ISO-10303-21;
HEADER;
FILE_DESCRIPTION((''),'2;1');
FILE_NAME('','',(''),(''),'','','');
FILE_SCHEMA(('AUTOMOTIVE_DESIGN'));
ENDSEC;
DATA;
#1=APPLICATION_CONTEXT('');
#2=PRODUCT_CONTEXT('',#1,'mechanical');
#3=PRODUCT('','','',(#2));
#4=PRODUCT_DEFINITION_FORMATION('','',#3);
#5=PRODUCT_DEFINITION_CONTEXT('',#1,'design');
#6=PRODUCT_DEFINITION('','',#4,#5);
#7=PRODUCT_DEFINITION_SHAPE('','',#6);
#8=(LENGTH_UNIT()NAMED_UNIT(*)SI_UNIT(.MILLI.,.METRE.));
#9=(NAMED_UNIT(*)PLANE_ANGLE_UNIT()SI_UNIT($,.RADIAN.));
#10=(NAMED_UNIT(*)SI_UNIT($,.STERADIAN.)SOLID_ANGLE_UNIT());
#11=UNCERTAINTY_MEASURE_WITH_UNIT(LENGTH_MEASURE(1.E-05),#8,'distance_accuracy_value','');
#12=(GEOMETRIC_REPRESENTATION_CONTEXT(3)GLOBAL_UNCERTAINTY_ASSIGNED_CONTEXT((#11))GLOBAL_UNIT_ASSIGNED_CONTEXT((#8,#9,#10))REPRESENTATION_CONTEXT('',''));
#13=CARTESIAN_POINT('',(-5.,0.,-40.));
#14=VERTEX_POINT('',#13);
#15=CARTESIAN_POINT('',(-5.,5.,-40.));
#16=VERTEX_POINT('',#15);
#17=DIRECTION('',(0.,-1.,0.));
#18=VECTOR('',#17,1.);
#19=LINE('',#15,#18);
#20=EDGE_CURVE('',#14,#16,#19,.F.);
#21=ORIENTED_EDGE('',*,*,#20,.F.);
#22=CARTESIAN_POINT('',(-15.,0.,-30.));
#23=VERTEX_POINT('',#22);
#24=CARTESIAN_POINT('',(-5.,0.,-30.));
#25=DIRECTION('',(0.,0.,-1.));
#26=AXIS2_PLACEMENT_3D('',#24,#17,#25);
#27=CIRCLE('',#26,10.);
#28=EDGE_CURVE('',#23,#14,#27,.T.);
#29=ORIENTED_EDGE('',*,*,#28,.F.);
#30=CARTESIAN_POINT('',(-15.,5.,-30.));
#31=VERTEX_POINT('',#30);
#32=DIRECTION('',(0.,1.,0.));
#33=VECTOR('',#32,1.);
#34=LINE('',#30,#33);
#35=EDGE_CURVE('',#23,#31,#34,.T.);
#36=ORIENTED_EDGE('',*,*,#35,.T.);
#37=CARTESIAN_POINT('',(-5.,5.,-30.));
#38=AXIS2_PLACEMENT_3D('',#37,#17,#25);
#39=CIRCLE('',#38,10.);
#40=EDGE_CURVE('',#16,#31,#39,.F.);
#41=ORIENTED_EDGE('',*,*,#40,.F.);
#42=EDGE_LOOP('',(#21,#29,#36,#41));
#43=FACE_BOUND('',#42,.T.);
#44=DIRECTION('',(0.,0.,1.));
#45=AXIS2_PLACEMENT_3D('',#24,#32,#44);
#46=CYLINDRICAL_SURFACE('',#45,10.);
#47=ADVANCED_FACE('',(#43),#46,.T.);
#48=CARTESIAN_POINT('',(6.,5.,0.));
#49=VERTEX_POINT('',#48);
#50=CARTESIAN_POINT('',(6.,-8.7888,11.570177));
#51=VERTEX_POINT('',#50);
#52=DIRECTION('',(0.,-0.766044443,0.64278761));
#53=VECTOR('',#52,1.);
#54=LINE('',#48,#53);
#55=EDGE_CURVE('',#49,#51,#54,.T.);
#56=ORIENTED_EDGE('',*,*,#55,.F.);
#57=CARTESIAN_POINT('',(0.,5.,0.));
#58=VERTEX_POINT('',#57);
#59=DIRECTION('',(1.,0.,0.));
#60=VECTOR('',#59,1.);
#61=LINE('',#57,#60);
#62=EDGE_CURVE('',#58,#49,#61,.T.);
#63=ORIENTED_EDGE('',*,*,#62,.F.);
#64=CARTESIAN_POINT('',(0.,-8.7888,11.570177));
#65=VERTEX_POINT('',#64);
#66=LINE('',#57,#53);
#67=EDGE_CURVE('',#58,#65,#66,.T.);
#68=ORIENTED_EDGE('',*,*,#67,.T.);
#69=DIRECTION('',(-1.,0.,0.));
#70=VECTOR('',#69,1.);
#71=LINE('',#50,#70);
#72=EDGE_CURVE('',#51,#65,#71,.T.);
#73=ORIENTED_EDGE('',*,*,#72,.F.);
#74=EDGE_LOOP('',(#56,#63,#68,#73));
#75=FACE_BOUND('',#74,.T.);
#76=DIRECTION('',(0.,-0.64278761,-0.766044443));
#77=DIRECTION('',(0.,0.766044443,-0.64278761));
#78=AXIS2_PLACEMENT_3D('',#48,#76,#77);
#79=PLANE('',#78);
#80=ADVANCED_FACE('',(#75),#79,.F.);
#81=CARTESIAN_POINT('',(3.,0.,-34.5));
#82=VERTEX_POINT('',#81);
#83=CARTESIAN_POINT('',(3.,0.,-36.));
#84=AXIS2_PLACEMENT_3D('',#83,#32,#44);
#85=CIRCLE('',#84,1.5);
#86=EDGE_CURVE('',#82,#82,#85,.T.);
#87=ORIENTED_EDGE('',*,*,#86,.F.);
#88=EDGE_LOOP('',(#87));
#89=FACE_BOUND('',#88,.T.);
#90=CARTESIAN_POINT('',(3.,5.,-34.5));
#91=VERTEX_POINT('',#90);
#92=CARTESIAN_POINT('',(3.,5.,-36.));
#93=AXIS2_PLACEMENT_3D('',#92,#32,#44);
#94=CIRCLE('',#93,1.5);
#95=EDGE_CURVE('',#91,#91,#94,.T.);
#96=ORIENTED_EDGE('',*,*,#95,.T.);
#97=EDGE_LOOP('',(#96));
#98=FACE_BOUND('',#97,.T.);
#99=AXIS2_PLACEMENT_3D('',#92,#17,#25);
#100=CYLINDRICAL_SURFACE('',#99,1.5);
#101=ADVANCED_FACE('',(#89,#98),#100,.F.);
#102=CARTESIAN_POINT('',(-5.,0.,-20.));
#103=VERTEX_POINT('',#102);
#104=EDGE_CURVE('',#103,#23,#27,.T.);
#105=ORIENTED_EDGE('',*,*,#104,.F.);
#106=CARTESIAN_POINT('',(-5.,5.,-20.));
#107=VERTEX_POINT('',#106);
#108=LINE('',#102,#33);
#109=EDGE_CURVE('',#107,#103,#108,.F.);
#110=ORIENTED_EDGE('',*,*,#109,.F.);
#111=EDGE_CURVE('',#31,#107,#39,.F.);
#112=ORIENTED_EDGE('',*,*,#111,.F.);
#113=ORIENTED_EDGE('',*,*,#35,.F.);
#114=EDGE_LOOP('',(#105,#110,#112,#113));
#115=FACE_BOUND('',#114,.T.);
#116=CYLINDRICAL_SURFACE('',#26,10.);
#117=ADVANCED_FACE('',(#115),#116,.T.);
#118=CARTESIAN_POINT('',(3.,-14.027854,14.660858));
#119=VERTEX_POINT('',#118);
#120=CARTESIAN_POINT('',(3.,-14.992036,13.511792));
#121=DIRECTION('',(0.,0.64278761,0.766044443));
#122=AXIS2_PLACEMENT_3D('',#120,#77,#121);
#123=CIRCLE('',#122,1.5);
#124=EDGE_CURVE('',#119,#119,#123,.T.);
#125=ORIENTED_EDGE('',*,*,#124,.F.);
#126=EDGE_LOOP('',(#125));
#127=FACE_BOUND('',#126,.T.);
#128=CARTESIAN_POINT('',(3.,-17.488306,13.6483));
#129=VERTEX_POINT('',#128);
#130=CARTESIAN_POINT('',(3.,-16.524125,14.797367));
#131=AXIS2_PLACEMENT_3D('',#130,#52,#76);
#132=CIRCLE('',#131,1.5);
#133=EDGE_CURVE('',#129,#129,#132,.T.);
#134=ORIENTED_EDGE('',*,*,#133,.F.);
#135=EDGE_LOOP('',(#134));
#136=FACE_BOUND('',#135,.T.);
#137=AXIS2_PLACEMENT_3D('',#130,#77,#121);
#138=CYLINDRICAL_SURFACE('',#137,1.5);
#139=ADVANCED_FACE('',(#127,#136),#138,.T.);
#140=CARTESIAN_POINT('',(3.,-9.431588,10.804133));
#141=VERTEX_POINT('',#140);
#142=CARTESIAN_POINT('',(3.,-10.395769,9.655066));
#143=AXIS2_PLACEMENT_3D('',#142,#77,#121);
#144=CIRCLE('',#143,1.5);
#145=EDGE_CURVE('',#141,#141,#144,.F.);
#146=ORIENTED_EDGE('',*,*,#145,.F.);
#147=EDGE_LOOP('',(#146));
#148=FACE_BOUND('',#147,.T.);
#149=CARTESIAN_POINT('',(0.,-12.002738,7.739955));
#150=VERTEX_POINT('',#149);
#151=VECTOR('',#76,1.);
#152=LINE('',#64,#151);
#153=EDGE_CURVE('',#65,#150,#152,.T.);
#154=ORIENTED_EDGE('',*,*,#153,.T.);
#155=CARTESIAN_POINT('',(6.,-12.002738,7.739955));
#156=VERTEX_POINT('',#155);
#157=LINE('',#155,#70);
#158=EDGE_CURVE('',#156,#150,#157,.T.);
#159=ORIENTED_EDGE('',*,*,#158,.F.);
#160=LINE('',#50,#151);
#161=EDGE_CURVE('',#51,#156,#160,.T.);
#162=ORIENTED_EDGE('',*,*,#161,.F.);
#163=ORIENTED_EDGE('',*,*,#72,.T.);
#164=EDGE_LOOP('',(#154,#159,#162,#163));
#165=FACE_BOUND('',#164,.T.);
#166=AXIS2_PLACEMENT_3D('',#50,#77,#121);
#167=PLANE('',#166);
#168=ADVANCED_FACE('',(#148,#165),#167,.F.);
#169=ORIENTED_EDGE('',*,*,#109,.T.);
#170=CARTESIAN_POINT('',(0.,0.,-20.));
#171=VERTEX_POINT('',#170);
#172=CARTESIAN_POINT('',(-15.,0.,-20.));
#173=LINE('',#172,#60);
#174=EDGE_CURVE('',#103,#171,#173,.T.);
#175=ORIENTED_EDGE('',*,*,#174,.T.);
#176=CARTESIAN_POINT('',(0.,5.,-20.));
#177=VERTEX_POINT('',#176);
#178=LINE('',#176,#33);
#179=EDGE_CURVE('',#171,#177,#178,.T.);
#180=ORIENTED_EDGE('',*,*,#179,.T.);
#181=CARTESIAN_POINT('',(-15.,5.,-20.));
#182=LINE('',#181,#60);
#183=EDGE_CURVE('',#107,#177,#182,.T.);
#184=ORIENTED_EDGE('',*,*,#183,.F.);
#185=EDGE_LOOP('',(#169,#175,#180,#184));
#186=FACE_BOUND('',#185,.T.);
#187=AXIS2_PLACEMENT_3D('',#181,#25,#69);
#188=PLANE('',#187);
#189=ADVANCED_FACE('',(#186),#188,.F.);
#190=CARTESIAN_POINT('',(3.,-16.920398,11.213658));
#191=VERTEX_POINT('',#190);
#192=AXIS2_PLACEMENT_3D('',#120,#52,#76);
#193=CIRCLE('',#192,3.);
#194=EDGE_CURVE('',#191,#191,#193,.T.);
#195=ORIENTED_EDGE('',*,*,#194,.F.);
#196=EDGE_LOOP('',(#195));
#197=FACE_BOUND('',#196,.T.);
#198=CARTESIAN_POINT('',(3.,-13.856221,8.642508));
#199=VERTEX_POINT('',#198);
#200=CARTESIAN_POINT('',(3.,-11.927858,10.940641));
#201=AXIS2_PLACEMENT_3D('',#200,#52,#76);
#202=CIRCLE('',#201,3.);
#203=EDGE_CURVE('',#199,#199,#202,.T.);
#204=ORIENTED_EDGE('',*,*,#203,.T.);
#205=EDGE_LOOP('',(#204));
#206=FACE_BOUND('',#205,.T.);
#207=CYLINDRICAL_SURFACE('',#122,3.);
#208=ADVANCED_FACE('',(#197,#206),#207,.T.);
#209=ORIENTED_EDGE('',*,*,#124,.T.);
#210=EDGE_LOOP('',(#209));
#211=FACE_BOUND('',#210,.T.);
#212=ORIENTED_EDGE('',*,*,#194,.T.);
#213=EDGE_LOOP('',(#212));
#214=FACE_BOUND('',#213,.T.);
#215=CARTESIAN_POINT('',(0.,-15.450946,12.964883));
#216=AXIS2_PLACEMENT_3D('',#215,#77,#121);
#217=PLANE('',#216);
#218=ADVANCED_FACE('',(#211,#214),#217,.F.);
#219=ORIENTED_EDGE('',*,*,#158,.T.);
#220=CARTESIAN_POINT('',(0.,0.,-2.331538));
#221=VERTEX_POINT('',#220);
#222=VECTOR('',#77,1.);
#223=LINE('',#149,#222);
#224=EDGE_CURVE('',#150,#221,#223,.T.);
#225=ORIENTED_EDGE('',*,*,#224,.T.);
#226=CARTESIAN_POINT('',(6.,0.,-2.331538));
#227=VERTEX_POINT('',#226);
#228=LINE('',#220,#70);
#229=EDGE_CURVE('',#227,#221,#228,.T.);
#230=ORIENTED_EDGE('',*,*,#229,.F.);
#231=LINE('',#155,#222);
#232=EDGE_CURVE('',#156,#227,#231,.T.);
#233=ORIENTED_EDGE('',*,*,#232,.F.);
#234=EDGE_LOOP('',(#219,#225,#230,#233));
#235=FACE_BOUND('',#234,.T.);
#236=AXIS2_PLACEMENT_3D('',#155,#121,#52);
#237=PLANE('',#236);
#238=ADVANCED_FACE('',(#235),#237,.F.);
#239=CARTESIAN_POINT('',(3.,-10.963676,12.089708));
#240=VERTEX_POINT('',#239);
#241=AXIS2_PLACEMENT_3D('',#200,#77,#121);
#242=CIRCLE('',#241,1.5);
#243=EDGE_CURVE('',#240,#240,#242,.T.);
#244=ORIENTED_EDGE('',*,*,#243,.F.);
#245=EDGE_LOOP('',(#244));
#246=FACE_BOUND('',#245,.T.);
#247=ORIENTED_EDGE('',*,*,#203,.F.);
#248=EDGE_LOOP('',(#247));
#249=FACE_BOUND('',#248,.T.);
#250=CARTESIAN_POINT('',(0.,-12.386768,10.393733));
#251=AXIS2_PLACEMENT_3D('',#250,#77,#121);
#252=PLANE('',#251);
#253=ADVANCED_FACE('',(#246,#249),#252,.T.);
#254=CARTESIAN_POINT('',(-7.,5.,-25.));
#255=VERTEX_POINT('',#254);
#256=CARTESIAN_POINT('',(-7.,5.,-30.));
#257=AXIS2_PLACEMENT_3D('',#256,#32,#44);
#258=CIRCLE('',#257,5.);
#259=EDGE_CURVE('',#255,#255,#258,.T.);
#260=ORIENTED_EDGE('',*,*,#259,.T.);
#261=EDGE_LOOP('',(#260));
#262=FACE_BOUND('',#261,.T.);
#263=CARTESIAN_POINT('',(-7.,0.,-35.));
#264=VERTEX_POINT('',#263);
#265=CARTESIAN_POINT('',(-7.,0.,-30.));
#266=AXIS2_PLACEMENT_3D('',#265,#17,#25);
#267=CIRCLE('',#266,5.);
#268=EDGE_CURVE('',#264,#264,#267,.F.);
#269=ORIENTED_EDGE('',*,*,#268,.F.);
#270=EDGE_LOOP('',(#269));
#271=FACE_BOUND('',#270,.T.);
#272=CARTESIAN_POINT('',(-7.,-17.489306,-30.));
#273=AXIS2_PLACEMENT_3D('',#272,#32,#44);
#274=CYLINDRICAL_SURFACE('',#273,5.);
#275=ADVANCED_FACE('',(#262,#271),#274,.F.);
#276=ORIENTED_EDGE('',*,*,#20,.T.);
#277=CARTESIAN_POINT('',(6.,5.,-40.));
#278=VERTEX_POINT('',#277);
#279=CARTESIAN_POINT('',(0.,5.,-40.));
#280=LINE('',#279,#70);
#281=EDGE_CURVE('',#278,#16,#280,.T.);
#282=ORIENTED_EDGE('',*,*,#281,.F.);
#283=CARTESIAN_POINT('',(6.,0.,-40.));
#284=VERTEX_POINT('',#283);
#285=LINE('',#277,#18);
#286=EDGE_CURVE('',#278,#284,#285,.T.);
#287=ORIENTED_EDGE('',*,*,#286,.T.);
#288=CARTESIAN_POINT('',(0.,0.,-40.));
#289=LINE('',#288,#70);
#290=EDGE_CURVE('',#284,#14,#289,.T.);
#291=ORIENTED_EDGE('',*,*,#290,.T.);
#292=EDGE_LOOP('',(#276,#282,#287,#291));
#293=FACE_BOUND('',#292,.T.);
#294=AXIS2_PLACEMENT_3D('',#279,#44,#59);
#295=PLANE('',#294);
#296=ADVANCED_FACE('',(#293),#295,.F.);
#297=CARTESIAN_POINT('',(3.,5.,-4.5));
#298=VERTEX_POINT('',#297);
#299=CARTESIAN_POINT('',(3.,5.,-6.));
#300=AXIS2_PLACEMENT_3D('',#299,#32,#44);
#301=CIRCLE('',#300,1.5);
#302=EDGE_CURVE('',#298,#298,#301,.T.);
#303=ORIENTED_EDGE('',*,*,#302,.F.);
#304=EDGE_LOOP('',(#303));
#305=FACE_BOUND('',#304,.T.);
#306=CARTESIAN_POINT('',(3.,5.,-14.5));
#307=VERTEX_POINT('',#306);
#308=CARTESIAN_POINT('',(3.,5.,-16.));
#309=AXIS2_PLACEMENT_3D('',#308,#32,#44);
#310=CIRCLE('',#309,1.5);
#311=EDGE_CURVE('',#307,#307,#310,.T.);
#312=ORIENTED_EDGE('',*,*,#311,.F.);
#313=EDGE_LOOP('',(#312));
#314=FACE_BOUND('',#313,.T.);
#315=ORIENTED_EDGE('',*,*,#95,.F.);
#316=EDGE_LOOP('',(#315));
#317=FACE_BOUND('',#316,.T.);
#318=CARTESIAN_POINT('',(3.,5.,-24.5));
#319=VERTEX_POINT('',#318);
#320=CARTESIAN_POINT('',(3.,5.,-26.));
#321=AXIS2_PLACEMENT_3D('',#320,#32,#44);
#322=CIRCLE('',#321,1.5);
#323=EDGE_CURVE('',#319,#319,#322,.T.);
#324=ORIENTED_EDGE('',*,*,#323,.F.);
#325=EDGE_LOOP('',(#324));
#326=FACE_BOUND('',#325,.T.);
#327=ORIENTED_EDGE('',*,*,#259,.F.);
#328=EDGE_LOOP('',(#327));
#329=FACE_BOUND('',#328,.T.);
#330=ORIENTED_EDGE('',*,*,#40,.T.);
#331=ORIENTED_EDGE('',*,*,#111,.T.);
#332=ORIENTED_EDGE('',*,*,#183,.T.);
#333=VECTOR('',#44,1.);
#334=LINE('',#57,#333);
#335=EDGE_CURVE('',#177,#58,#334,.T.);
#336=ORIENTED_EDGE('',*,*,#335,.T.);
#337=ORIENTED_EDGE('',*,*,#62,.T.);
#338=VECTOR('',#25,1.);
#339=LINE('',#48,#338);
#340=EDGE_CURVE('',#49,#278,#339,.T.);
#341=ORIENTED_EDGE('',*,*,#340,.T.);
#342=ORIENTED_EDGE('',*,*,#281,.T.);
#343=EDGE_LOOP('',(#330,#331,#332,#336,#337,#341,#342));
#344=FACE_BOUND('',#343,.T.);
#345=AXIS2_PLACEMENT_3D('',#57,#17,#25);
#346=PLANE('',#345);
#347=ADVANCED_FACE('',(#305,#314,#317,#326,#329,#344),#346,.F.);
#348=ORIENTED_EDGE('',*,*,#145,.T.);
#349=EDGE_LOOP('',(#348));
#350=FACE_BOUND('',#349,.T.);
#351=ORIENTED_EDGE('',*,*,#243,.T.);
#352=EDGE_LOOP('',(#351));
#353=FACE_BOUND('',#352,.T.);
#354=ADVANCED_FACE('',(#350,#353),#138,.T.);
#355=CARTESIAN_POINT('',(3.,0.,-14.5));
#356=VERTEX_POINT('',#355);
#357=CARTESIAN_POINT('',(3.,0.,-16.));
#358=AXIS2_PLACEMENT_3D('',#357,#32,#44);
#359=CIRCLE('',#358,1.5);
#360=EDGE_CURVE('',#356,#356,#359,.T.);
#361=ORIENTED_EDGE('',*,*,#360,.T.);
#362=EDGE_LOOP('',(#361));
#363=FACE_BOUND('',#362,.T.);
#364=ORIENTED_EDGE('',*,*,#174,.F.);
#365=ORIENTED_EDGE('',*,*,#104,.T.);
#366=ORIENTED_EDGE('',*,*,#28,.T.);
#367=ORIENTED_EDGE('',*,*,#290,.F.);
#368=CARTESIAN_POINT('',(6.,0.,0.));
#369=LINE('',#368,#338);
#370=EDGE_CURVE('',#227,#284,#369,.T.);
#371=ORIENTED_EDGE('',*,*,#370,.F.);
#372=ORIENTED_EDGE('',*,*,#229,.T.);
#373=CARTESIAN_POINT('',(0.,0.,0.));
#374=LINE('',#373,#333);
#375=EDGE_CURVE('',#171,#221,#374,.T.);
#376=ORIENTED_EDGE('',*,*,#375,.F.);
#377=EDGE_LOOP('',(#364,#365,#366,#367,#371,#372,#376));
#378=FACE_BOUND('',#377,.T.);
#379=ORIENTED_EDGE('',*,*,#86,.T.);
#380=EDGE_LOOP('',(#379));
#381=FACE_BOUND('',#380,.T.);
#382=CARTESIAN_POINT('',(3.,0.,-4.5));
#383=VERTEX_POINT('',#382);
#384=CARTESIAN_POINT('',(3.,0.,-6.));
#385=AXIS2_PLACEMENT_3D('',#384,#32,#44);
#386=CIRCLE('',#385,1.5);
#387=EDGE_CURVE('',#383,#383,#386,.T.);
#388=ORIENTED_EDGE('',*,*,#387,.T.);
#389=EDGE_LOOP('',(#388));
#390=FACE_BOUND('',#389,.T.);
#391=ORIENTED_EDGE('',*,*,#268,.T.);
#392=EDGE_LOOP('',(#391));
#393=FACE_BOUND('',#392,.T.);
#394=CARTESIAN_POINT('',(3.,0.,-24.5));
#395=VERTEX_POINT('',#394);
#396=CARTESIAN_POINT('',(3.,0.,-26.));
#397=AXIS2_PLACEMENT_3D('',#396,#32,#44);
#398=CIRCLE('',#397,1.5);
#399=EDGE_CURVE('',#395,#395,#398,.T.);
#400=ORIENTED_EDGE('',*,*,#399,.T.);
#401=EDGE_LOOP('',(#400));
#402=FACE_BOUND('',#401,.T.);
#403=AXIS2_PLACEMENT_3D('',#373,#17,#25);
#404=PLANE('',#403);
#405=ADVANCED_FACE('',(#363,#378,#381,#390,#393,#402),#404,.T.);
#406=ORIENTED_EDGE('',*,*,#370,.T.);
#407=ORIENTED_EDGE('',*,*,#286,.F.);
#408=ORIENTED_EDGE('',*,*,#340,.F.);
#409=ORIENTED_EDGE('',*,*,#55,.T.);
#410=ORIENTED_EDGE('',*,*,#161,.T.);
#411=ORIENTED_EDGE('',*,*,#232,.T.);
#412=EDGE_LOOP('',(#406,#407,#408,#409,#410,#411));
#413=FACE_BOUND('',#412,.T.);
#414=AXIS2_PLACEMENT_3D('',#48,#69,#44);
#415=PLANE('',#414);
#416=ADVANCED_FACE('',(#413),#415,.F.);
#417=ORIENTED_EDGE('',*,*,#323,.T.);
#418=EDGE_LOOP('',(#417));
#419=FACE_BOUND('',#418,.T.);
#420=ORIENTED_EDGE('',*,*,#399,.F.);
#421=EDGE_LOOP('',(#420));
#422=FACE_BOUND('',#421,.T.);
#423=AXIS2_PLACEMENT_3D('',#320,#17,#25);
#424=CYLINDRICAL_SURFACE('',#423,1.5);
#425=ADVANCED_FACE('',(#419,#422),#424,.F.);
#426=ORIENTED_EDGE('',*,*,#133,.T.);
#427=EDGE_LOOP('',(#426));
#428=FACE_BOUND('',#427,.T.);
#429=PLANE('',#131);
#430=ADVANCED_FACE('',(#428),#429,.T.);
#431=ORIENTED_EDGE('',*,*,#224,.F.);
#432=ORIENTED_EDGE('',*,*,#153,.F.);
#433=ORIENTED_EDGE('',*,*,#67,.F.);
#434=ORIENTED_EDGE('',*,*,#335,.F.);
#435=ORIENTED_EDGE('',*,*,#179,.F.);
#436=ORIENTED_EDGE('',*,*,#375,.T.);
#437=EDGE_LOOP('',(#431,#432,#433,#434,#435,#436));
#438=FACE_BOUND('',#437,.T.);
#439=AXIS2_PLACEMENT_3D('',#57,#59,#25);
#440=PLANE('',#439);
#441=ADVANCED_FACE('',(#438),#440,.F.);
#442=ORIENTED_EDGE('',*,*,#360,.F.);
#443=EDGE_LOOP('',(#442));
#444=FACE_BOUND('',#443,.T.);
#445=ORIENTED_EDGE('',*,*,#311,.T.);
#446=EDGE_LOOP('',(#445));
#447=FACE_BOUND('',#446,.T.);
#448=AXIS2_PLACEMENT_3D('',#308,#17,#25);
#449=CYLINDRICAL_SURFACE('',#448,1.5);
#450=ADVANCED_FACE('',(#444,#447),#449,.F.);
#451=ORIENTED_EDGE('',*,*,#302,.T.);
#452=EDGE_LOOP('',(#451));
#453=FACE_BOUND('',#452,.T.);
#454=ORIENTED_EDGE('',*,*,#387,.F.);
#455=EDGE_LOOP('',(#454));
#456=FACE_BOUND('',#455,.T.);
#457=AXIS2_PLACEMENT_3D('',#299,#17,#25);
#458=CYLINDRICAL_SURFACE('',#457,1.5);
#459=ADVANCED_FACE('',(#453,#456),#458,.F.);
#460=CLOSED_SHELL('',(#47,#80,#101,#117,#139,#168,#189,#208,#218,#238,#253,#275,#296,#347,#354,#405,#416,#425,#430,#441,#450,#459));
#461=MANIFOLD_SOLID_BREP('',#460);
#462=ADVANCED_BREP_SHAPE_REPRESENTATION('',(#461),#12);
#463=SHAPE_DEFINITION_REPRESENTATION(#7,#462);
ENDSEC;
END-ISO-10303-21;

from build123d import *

# Parameters (mm, degrees)
SKETCH1_W                 = 6
SKETCH1_H                 = 40
BOSS_EXTRUDE1_DEPTH       = 5
SKETCH3_R                 = 1.5
CUT_EXTRUDE1_DEPTH        = 41.755367745
LPATTERN1_COUNT           = 4
LPATTERN1_PITCH           = 10
BOSS_EXTRUDE3_DEPTH       = 6
SKETCH12_R                = 1.5
BOSS_EXTRUDE7_DEPTH       = 8
SKETCH10_W                = 20
SKETCH10_H                = 5
BOSS_EXTRUDE6_DEPTH       = 15
CUT_EXTRUDE2_REACH        = 50.278
SKETCH11_R                = 5
FILLET1_R                 = 10
BOSS_EXTRUDE8_START       = -20.169777786
BOSS_EXTRUDE8_OUTLINE_R   = 3
BOSS_EXTRUDE8_OUTLINE_R_2 = 1.5
BOSS_EXTRUDE8_DEPTH       = 4


# Read off the part's stored shape, not the designer's step: Boss-Extrude8
with BuildPart() as part:
    # Sketch1 → Boss-Extrude1 (new body)
    with BuildSketch(Plane(origin=(0, 0, 0), x_dir=(1, 0, 0), z_dir=(0, 1, 0))):
        with Locations((3, 20)):
            Rectangle(SKETCH1_W, SKETCH1_H)
    extrude(amount=BOSS_EXTRUDE1_DEPTH)

    # Sketch3 → Cut-Extrude1 (cut, through all)
    with BuildSketch(Plane(origin=(0, 0, 0), x_dir=(1, 0, 0), z_dir=(0, 1, 0))):
        with Locations(Location((3, 6, 0), (0, 0, 270))):
            Circle(SKETCH3_R)
    cut_extrude1 = extrude(amount=CUT_EXTRUDE1_DEPTH, mode=Mode.SUBTRACT)

    # LPattern1: Cut-Extrude1 ×4
    with Locations(*[(0, 0, -i * LPATTERN1_PITCH) for i in range(1, LPATTERN1_COUNT)]):
        add(cut_extrude1, mode=Mode.SUBTRACT)

    # Sketch4 → Boss-Extrude3 (add)
    with BuildSketch(Plane(origin=(0, 0, 0), x_dir=(0, 0, -1), z_dir=(1, 0, 0))):
        Polygon((-11.570176974, -8.788799976), (-7.739954759, -12.002738025), (3.830222216, 1.786061952), (0, 5), align=None)
    extrude(amount=BOSS_EXTRUDE3_DEPTH)

    # Sketch12 → Boss-Extrude7 (add)
    with BuildSketch(Plane(origin=(0, -10.854679532, 9.108157592), x_dir=(1, 0, 0), z_dir=(0, -0.7660444431189747, 0.6427876096865434))):
        with Locations(Location((3, 0.713938048, 0), (0, 0, 90))):
            Circle(SKETCH12_R)
    extrude(amount=BOSS_EXTRUDE7_DEPTH)

    # Sketch10 → Boss-Extrude6 (add)
    with BuildSketch(Plane.ZY):
        with Locations((-30, 2.5)):
            Rectangle(SKETCH10_W, SKETCH10_H)
    extrude(amount=BOSS_EXTRUDE6_DEPTH)

    # Sketch11 → Cut-Extrude2 (cut, up to next)
    with BuildSketch(Plane(origin=(0, 5, 0), x_dir=(1, 0, 0), z_dir=(0, 1, 0)), mode=Mode.PRIVATE) as cut_extrude2_sk1:
        with Locations(Location((-7, 30, 0), (0, 0, 270))):
            Circle(SKETCH11_R)
    cut_extrude2_tool1 = extrude(cut_extrude2_sk1.sketch, amount=-CUT_EXTRUDE2_REACH, mode=Mode.PRIVATE) & part.part
    add(cut_extrude2_tool1.solids().sort_by_distance((-7, 5, -30))[0], mode=Mode.SUBTRACT)

    # Fillet1
    fillet1_edges = [part.edges().sort_by_distance(p)[0] for p in [
        (-15, 2.5, -40),
        (-15, 2.5, -20),
    ]]
    fillet(fillet1_edges, radius=FILLET1_R - 0.0001)  # a hair under: the kernel refuses the full size

    # Boss-Extrude8 outline → Boss-Extrude8 (add)
    with BuildSketch(Plane(origin=(0, 0, 0), x_dir=(1, 0, 0), z_dir=(0, 0.766044443118975, -0.642787609686543)).offset(BOSS_EXTRUDE8_START)):
        with Locations((3, -0.713938048)):
            Circle(BOSS_EXTRUDE8_OUTLINE_R)
        with Locations((3, -0.713938048)):
            Circle(BOSS_EXTRUDE8_OUTLINE_R_2, mode=Mode.SUBTRACT)
    extrude(amount=BOSS_EXTRUDE8_DEPTH)


solid = part.part
